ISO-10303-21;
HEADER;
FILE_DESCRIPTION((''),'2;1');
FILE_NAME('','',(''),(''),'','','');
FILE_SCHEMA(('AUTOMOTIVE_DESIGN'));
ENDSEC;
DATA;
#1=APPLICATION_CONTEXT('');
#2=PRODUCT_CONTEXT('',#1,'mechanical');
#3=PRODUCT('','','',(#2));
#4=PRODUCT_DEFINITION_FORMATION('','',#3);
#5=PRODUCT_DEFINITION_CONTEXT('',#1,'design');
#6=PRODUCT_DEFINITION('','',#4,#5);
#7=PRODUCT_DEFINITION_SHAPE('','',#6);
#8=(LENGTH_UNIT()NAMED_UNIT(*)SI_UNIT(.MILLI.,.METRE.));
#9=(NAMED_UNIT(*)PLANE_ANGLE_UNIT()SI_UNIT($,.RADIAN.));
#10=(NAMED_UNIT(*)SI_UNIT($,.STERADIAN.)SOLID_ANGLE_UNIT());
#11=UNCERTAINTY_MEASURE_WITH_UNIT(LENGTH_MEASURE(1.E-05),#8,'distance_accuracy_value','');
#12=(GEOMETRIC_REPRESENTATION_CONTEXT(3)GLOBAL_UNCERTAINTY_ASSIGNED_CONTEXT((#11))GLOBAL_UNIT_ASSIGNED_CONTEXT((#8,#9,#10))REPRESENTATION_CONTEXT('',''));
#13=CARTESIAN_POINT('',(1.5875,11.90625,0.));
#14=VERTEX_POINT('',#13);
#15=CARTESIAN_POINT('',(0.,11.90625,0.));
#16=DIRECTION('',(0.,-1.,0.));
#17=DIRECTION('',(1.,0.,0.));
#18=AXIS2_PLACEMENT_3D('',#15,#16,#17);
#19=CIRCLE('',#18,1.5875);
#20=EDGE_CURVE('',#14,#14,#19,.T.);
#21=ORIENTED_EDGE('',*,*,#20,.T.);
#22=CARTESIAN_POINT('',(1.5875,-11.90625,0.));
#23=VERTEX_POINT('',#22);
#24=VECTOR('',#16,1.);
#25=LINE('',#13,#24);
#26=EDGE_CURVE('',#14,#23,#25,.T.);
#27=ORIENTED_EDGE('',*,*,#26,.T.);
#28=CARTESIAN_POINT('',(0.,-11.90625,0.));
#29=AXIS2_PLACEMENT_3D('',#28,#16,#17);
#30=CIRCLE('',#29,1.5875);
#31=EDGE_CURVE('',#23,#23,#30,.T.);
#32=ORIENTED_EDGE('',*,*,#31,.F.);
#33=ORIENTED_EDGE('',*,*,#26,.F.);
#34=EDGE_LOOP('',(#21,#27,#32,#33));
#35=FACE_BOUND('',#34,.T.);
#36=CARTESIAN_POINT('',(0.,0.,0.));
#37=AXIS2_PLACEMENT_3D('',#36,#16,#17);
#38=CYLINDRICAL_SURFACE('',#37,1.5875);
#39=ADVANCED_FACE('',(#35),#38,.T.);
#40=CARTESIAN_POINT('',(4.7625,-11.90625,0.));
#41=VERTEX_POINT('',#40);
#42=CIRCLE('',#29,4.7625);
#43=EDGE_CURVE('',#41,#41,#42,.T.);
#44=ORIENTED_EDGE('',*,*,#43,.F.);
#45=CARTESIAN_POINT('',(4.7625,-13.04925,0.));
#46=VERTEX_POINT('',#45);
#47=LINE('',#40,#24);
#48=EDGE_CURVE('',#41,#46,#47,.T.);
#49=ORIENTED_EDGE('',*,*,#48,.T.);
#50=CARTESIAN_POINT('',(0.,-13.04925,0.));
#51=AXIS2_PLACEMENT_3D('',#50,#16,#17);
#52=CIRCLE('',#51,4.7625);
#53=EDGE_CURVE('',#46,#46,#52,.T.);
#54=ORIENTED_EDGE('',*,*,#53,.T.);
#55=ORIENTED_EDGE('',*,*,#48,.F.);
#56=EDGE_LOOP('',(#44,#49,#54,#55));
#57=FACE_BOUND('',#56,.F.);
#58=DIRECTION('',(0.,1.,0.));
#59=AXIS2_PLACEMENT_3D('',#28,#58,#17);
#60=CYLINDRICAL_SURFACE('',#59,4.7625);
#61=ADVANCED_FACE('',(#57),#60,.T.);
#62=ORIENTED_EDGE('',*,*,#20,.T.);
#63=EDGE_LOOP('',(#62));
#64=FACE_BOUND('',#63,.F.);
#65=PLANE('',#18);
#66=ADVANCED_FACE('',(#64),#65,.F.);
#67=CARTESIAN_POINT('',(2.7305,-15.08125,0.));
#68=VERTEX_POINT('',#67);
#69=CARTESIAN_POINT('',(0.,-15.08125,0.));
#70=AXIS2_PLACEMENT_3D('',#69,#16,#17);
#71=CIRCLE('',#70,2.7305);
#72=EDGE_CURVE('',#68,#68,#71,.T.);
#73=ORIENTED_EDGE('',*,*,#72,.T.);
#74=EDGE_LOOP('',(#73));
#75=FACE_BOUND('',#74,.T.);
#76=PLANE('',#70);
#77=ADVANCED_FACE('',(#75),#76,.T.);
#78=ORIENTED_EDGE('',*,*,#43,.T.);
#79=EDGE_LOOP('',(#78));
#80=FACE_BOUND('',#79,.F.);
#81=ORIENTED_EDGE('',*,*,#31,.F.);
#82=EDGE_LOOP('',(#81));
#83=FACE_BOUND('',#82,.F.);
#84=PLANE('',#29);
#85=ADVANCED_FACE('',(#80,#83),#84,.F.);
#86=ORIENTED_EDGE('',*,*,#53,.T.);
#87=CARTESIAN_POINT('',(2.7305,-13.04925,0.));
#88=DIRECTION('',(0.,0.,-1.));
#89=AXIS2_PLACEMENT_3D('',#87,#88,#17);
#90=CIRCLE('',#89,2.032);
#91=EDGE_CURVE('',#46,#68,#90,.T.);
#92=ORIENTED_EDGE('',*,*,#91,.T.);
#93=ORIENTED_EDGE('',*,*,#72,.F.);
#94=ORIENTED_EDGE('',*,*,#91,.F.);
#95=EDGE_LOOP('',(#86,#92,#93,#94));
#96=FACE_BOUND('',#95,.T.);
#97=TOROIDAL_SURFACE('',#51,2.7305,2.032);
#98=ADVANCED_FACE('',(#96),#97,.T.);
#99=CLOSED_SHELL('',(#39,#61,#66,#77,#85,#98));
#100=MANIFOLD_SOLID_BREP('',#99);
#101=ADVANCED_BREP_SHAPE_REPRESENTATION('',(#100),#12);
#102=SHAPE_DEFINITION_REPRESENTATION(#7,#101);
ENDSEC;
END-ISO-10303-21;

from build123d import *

# Parameters (mm, degrees)
F0_R     = 1.5875
F1_DEPTH = 11.90625
F2_R     = 4.7625
F3_DEPTH = 3.175
F4_R     = 2.032


# Not quite as in the source:
# - a length typed as a fraction of an inch, garbled in the dataset ("3 / 203.2 mm" for 3/8 in), is restored


with BuildPart() as f1:
    # F0 (on Front) → F1 (new body, symmetric)
    with BuildSketch(Plane.XZ):
        Circle(F0_R)
    extrude(amount=F1_DEPTH, both=True)

    # F2 (on face) → F3 (join)
    with BuildSketch(Plane.XZ.offset(11.90625)):
        Circle(F2_R)
    extrude(amount=F3_DEPTH)

    # F4
    f4_edges = [f1.edges().sort_by_distance(p)[0] for p in [
        (-4.7625, -15.08125, 0),
    ]]
    fillet(f4_edges, radius=F4_R)


solid = f1.part
